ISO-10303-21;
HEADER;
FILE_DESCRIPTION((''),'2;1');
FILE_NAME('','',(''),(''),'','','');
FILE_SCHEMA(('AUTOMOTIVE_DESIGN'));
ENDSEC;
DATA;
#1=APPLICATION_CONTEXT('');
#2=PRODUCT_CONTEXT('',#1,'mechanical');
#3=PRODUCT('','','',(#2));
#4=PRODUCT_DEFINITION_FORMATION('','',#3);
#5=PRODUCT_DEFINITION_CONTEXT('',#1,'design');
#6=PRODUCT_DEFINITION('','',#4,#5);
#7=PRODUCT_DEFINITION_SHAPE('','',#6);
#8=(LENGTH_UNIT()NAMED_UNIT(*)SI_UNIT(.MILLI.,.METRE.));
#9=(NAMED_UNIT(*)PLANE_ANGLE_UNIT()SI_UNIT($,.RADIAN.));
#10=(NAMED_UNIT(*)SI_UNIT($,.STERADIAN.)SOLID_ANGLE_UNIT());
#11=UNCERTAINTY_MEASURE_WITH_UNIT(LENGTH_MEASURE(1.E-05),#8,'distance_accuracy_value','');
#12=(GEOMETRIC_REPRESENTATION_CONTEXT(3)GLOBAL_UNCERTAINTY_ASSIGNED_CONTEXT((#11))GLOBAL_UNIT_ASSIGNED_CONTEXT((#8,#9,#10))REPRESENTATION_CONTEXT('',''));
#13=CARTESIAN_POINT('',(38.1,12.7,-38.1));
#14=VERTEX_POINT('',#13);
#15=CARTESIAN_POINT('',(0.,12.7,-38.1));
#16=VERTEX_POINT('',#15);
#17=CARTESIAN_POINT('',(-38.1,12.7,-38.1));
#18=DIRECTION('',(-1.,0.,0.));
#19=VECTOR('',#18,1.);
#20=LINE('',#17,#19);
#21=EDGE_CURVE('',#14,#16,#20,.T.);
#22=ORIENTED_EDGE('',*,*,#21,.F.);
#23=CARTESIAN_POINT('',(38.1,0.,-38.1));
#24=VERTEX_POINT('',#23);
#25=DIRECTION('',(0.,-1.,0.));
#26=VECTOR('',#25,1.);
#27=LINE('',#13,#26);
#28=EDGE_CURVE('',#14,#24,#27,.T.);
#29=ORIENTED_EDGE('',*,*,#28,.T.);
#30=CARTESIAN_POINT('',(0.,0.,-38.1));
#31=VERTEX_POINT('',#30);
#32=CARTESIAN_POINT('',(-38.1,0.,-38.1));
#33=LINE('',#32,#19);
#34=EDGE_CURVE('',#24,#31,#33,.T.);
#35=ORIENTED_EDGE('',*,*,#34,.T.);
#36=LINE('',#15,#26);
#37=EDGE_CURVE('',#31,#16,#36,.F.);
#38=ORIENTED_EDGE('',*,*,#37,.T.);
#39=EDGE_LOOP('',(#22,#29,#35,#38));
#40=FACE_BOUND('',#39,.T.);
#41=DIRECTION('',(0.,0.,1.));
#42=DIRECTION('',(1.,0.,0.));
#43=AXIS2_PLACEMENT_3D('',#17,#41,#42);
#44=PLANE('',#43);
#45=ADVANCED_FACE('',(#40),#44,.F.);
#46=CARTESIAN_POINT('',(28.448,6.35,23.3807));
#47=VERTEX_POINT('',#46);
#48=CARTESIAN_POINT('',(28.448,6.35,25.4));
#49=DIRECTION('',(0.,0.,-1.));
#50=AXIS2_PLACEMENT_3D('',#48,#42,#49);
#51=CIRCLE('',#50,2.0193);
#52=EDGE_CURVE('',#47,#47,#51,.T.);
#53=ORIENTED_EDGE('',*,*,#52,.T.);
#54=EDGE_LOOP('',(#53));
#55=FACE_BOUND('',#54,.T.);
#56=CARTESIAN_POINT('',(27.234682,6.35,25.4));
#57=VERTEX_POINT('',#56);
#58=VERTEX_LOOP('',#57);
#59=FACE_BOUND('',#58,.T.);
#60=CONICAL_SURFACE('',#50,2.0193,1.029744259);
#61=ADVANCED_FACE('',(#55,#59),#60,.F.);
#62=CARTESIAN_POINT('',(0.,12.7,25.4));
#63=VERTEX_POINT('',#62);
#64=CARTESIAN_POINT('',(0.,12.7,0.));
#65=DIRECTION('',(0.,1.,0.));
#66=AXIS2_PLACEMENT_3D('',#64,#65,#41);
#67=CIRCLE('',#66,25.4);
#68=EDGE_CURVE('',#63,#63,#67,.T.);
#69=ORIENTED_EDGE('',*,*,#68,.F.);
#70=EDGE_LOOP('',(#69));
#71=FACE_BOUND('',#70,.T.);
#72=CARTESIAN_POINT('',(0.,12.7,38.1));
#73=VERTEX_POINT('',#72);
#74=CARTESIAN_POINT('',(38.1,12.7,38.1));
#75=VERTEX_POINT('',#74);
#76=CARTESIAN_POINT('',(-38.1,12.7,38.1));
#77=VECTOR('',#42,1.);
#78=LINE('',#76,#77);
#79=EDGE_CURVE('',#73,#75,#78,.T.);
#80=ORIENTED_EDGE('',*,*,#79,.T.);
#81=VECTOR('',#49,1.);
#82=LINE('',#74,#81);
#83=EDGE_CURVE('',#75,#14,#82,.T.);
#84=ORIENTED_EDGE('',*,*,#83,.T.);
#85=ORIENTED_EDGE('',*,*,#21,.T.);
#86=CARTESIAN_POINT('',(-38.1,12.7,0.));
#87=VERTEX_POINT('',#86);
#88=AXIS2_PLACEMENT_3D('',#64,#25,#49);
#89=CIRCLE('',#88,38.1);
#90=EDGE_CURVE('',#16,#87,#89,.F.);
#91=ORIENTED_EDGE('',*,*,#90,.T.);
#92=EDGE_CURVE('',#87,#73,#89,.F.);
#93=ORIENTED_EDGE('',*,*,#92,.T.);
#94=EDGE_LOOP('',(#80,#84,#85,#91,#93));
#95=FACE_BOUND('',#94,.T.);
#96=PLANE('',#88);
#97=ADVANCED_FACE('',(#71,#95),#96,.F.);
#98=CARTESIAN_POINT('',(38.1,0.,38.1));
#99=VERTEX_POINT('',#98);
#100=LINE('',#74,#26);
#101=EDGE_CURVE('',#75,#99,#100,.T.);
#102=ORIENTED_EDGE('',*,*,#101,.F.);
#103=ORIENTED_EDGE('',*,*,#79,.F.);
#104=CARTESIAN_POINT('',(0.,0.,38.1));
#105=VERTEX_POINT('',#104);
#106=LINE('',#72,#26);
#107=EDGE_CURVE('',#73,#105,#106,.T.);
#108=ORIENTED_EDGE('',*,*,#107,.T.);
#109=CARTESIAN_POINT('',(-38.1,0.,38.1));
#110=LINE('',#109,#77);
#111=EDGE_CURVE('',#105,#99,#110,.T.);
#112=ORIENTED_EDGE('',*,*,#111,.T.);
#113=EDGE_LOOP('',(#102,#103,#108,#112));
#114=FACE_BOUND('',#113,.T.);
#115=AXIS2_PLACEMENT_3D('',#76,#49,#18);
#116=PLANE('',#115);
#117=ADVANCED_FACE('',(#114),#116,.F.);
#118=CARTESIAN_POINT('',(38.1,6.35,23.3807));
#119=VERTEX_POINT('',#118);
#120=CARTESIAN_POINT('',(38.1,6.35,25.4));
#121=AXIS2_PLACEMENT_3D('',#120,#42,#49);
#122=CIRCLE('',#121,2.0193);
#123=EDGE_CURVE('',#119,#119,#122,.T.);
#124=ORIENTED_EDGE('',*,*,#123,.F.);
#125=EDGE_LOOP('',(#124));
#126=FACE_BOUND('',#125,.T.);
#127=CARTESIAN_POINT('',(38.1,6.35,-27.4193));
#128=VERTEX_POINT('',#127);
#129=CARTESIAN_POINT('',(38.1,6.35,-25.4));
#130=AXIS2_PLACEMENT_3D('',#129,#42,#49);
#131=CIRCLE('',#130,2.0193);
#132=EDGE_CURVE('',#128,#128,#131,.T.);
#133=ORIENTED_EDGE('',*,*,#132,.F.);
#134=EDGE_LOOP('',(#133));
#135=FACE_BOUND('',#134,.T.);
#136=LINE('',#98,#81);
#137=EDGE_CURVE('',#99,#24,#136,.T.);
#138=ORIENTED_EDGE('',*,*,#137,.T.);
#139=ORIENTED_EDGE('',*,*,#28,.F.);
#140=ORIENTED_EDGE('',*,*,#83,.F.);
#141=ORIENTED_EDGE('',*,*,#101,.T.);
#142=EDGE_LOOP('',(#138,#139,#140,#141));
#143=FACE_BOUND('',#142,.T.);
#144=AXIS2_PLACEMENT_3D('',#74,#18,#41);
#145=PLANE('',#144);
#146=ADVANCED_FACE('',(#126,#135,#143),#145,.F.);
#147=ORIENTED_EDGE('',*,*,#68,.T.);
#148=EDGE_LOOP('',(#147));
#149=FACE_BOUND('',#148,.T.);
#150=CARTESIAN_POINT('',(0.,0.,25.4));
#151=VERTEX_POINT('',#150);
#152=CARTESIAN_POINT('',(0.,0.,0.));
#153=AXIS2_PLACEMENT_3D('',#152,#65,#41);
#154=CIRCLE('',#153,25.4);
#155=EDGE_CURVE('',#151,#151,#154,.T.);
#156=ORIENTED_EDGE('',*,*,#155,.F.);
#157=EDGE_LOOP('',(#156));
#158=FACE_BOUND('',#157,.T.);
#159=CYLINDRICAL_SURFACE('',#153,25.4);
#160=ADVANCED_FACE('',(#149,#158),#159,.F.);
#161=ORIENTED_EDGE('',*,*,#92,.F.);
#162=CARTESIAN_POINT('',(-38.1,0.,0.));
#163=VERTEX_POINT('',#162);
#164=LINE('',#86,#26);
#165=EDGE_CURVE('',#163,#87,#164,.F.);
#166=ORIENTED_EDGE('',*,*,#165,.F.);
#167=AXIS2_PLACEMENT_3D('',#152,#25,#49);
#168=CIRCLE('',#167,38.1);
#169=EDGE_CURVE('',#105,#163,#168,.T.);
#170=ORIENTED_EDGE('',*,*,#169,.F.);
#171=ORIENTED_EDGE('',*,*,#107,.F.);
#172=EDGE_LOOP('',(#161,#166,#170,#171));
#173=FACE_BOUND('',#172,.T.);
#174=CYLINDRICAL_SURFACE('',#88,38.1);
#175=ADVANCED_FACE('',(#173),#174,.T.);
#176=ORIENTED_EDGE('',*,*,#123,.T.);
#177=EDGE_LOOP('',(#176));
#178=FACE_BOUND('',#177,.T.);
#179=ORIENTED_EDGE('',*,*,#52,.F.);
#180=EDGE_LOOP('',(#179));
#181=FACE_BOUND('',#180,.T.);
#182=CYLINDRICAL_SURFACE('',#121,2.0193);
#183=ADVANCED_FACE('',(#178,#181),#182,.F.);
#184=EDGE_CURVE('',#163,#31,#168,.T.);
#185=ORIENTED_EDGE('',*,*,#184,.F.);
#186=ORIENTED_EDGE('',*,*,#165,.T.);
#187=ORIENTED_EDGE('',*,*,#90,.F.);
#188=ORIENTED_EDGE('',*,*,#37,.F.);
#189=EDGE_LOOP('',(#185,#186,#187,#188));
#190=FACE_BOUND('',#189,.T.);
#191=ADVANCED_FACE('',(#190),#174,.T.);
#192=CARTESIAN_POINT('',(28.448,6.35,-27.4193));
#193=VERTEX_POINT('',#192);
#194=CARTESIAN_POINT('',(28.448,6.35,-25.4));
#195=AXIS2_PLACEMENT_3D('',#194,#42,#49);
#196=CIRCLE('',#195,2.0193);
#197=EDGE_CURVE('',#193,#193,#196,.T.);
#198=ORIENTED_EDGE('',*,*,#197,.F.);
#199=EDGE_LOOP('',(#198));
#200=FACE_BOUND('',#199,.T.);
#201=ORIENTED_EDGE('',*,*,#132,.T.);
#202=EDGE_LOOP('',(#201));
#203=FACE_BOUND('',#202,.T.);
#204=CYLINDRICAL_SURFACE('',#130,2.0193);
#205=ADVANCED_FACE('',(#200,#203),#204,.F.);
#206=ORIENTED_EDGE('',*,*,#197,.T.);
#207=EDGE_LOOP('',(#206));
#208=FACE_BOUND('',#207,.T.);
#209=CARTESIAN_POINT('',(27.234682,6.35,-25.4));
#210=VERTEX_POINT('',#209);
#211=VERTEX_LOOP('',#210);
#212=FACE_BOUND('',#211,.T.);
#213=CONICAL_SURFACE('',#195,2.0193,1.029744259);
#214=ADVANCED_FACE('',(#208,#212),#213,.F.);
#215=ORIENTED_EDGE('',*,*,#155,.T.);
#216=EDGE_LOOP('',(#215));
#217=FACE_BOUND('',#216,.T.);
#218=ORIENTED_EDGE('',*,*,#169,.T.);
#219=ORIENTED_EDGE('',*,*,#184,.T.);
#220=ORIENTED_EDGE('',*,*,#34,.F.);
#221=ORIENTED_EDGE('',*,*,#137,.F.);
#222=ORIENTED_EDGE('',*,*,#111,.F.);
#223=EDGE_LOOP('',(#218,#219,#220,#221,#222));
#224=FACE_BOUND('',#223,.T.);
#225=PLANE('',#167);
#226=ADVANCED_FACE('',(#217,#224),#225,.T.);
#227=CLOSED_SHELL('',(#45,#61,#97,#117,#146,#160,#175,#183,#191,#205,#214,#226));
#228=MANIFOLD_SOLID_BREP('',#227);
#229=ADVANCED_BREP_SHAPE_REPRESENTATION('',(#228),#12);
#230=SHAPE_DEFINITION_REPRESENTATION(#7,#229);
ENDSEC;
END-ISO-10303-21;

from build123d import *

# Parameters (mm, degrees)
SKETCH1_W                  = 76.2
SKETCH1_H                  = 76.2
BOSS_EXTRUDE1_DEPTH        = 12.7
F_10_32_TAPPED_HOLE1_D     = 4.0386
F_10_32_TAPPED_HOLE1_DEPTH = 9.652
F_10_32_TAPPED_HOLE1_TIP   = 1.213317848
SKETCH9_R                  = 25.4
CUT_EXTRUDE2_DEPTH         = 56.358016583
FILLET1_R                  = 38.1


with BuildPart() as part:
    # Sketch1 → Boss-Extrude1 (new body)
    with BuildSketch(Plane(origin=(0, 0, 0), x_dir=(1, 0, 0), z_dir=(0, 1, 0))):
        Rectangle(SKETCH1_W, SKETCH1_H)
    extrude(amount=BOSS_EXTRUDE1_DEPTH)

    # #10-32 Tapped Hole1
    with Locations(Plane(origin=(38.1, 0, 0), x_dir=(0, 0, -1), z_dir=(1, 0, 0))):
        with Locations((-25.4, 6.35), (25.4, 6.35)):
            Hole(F_10_32_TAPPED_HOLE1_D / 2, depth=F_10_32_TAPPED_HOLE1_DEPTH)
            with Locations((0, 0, -(F_10_32_TAPPED_HOLE1_DEPTH + F_10_32_TAPPED_HOLE1_TIP / 2))):  # 118° drill point
                Cone(0, F_10_32_TAPPED_HOLE1_D / 2, F_10_32_TAPPED_HOLE1_TIP, mode=Mode.SUBTRACT)

    # Sketch9 → Cut-Extrude2 (cut, through all)
    with BuildSketch(Plane(origin=(0, 12.7, 0), x_dir=(1, 0, 0), z_dir=(0, 1, 0))):
        with Locations(Location((0, 0, 0), (0, 0, 270))):
            Circle(SKETCH9_R)
    extrude(amount=-CUT_EXTRUDE2_DEPTH, mode=Mode.SUBTRACT)

    # Fillet1
    fillet1_edges = [part.edges().sort_by_distance(p)[0] for p in [
        (-38.1, 6.35, -38.1),
        (-38.1, 6.35, 38.1),
    ]]
    fillet(fillet1_edges, radius=FILLET1_R - 0.0001)  # a hair under: the kernel refuses the full size


solid = part.part
